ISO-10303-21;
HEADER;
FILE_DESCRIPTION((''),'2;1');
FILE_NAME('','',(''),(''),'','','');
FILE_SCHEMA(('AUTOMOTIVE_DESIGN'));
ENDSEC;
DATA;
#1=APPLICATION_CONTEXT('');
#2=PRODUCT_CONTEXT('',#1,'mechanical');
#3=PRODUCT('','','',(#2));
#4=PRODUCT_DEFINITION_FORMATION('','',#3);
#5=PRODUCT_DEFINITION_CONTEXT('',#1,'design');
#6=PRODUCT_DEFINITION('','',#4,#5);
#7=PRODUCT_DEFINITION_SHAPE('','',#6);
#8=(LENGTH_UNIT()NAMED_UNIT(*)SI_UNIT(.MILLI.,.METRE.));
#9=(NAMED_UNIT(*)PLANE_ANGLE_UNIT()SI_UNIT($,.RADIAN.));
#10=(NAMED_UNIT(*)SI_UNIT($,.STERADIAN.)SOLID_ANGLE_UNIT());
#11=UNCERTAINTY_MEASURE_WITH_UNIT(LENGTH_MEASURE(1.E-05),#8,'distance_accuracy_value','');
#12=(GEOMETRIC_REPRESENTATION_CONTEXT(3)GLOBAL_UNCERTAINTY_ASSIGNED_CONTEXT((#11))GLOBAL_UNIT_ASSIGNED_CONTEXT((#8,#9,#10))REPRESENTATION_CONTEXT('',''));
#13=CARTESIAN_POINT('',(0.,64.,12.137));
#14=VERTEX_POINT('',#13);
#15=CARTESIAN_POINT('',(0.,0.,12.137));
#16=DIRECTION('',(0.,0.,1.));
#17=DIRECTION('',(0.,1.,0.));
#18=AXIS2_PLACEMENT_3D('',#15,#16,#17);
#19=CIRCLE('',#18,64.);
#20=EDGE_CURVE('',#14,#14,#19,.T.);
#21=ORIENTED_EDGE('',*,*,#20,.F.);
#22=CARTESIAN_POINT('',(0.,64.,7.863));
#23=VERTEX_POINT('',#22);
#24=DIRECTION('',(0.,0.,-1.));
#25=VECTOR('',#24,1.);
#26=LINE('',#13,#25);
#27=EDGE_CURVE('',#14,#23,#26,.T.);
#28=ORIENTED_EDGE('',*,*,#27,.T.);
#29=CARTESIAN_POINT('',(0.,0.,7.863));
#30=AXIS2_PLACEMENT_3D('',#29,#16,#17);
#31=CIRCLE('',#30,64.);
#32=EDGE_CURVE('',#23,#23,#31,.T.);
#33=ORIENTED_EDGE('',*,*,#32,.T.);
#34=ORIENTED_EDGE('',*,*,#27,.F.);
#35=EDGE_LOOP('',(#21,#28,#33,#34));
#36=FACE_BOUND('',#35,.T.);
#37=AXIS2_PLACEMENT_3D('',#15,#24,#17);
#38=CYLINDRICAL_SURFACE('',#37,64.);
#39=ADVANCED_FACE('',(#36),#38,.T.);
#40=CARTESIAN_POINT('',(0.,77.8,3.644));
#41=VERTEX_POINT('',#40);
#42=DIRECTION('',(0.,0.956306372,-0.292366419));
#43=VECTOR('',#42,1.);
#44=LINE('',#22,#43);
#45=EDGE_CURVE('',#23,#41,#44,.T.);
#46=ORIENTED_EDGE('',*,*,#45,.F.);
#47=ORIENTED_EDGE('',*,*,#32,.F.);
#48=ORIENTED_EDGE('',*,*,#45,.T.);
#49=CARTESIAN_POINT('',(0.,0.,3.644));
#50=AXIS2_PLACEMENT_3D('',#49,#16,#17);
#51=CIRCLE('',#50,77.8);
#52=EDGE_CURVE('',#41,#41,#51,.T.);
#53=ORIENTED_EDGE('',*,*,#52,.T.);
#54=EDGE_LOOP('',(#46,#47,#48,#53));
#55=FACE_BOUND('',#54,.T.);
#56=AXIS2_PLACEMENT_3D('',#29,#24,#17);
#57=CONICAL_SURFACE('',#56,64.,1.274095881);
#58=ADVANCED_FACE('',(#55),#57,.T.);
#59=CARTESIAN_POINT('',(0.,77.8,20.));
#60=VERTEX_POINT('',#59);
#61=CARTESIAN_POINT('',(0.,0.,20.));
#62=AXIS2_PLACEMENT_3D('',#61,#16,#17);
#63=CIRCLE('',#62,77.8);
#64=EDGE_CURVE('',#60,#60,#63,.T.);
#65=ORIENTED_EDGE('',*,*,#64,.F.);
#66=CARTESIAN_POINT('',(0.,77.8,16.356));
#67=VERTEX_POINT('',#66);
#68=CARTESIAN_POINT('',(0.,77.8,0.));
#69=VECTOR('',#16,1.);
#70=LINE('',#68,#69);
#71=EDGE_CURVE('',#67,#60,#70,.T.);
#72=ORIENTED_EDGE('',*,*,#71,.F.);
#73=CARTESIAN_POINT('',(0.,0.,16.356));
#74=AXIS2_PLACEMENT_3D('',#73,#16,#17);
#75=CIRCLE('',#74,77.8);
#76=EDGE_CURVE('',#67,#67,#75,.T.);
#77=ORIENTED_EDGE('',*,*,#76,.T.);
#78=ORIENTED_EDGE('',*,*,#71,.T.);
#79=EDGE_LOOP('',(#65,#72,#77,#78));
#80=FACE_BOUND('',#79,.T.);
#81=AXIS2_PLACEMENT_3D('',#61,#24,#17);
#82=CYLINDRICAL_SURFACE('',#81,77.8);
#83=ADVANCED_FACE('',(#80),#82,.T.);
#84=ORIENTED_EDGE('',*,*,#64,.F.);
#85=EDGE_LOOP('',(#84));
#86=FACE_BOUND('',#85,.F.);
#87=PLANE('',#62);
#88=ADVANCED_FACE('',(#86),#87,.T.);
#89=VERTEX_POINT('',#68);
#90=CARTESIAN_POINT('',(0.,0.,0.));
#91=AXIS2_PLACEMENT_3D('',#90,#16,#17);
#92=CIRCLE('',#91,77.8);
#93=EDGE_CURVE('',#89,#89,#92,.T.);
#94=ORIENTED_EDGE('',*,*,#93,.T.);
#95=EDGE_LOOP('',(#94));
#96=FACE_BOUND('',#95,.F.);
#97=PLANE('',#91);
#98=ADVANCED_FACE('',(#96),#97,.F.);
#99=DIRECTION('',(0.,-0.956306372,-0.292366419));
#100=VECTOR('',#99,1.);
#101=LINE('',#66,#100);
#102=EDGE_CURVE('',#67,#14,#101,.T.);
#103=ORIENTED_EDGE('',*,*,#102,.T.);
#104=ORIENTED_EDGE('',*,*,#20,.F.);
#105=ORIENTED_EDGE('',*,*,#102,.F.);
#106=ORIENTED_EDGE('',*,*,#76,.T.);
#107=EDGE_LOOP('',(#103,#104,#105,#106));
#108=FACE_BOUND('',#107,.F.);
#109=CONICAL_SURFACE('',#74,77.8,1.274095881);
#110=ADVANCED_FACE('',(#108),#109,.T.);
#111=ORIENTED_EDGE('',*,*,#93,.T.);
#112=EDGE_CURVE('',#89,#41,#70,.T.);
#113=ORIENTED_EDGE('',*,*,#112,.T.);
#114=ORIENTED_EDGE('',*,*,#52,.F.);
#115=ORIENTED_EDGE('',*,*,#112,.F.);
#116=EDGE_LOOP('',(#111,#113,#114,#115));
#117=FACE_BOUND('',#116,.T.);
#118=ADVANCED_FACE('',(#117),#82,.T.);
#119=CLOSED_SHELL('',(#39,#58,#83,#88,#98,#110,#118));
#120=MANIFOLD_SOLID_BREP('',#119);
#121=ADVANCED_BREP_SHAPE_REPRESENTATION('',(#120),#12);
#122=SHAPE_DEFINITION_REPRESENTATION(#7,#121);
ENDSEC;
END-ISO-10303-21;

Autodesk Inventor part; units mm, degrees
ref_plane "YZ Plane" through (0, 0, 0) normal (1, 0, 0) x (0, 1, 0)
ref_plane "XZ Plane" through (0, 0, 0) normal (0, 1, 0) x (-1, 0, 0)
sketch "Boceto principal" plane through (0, 0, 0) normal (1, 0, 0) x (0, 1, 0)
  line L0 (0, 20) -> (77.8, 20)
  line L1 (77.8, 20) -> (77.8, 16.356)
  line L2 (77.8, 16.356) -> (64, 12.137)
  line L3 (64, 12.137) -> (64, 7.863)
  line L4 (64, 7.863) -> (77.8, 3.644)
  line L5 (77.8, 3.644) -> (77.8, 0)
  line L6 (77.8, 0) -> (0, 0)
  line L7 (75, 15.5) -> (75, 4.5) construction
  line L8 (64, 10) -> (75, 10) construction
  line L9 (77.8, 16.356) -> (77.8, 3.644)
  line L10 (0, -4) -> (0, 24) projected
  line L11 (0, 0) -> (0, 20)
  dimension "d0" = 11
  dimension "d1" = 34
  dimension "d2" = 2.8
  dimension "d6" = 20
  dimension "d21" = 150
  dimension "d25" = 13.8
  dimension "d27" = 10
ref_plane "Plano de correa" through (0, 64, 10) normal (0, 0, 1) x (1, 0, 0)
revolve "Cuerpo" add sketch "Boceto principal" angle 360 about axis through (0, 0, -10) along (0, 0, 1)
revolve "Para ranuras" cut sketch "Boceto principal" angle 360 about axis through (0, 0, -10) along (0, 0, 1) contours L9 L4 L3 L2
fillet "Empalme externo" [suppressed]
fillet "Empalme interno" [suppressed]
pattern_of_one "Patrón para ranuras"
equation "\"d0\" = da_Bw"
equation "\"d1\" = da_Alfa"
equation "\"d2\" = da_c"
equation "\"d21\" = da_Dw"
equation "\"d25\" = da_Hd"
equation "\"d27\" = da_Se"
equation "\"da_r1\" = 0"
equation "\"da_r2\" = 0"
equation "\"d18\" = da_Sg"
equation "\"da_Bw\" = 11"
equation "\"da_Alfa\" = 34deg"
equation "\"da_c\" = 2.8"
equation "\"da_Dw\" = 150"
equation "\"da_Hd\" = 13.8"
equation "\"da_Se\" = 10"
equation "\"da_Sg\" = 15"
properties part number "Polea ranurada1" material "Steel"
